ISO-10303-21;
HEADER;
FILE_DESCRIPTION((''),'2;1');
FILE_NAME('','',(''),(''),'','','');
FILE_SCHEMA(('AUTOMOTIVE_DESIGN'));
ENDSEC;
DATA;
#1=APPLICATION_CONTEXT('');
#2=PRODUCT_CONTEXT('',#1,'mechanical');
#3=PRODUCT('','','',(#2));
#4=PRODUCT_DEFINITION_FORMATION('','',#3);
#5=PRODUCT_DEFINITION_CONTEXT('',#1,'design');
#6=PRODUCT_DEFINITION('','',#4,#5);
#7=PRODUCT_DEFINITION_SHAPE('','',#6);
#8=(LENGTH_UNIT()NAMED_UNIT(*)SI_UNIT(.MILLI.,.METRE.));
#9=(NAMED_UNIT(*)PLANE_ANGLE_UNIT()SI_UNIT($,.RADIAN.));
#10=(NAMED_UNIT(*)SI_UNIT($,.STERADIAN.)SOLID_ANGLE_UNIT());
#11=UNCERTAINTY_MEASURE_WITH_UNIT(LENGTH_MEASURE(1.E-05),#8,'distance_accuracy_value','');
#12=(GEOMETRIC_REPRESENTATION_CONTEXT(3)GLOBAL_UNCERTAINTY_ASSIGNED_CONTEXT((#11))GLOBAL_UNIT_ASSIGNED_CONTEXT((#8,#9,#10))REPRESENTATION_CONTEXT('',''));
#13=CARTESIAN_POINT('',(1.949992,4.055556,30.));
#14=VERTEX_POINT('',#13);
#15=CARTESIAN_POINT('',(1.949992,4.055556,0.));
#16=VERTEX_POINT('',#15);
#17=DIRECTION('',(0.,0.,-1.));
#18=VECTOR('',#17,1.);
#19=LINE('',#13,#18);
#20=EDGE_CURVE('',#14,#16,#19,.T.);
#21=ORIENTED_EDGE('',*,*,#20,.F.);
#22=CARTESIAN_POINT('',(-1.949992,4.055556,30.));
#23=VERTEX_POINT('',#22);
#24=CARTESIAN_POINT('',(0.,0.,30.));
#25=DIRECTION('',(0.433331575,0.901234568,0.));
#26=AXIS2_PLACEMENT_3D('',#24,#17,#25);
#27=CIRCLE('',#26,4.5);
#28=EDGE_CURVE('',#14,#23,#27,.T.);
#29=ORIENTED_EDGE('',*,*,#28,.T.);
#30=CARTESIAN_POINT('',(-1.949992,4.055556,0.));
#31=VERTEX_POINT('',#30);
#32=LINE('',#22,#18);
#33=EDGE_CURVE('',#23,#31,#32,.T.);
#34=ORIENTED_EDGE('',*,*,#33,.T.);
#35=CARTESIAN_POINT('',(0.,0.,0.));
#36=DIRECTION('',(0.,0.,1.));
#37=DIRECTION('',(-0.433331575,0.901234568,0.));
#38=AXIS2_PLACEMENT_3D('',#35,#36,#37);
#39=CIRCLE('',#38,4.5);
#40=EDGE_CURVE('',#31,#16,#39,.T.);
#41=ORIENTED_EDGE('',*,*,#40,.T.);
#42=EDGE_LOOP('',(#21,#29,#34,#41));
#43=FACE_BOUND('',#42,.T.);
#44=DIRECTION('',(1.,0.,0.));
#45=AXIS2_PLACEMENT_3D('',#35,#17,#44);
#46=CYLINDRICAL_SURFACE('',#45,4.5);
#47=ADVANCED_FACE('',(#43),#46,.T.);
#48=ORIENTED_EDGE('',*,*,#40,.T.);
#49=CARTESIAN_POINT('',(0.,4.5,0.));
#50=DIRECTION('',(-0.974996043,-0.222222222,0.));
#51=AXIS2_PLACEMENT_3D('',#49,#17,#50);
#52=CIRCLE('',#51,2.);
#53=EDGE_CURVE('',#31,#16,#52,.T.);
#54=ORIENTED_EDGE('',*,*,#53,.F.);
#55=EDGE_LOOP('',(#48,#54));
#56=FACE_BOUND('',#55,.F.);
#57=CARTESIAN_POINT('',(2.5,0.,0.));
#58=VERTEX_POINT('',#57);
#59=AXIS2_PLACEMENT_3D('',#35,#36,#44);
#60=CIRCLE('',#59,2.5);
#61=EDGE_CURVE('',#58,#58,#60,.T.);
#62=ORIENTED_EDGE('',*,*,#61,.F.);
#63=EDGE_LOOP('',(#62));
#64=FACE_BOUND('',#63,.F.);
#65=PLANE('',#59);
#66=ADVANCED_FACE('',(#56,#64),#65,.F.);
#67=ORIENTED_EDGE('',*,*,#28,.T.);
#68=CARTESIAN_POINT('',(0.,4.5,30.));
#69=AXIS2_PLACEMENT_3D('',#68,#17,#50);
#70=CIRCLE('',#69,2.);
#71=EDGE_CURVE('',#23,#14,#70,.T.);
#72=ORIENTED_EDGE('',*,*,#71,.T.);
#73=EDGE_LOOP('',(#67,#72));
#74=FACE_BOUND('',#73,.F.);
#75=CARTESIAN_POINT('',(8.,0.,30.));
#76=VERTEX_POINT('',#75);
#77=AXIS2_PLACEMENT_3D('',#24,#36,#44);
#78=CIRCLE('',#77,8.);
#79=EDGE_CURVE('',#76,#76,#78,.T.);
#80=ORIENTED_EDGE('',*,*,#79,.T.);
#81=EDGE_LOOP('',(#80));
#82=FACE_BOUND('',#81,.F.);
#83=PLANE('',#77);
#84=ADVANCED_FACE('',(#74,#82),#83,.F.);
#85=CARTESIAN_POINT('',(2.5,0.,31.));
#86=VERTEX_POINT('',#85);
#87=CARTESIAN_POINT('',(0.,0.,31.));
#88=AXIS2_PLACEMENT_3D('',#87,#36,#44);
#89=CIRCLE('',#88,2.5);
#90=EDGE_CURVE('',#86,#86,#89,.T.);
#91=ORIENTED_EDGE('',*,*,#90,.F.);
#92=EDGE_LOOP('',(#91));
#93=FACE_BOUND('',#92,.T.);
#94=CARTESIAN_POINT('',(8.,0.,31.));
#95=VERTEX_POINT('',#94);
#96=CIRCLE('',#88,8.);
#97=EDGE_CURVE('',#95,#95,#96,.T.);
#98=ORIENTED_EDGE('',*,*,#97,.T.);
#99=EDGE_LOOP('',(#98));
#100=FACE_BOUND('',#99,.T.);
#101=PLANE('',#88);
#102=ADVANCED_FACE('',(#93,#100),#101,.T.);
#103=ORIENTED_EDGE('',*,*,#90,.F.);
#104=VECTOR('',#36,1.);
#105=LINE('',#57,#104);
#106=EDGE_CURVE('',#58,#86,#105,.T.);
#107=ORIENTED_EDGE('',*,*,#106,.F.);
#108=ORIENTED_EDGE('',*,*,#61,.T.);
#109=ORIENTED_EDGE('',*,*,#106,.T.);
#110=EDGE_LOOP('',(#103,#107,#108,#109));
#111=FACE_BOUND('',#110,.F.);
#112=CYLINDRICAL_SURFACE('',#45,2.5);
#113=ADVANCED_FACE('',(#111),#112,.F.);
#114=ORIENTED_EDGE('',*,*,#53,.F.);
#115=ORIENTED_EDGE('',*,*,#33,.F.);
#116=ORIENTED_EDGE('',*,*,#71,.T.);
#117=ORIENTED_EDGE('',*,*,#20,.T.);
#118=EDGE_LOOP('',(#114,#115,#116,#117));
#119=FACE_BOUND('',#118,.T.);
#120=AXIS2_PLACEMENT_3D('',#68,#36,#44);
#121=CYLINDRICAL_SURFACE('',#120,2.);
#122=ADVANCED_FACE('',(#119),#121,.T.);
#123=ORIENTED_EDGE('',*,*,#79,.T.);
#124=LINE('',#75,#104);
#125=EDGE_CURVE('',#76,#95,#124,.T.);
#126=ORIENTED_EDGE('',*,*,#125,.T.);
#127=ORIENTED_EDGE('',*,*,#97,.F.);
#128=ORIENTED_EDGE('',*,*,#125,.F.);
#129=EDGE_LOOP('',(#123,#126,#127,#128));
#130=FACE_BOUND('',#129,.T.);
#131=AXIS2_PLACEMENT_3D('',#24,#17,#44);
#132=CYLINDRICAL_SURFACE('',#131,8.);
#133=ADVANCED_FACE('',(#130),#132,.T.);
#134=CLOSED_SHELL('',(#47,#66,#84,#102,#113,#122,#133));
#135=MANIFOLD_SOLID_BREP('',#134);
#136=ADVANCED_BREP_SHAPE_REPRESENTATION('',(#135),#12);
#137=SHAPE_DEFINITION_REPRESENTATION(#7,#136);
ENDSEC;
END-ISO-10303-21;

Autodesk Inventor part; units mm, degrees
ref_plane "YZ Plane" through (0, 0, 0) normal (1, 0, 0) x (0, 1, 0)
ref_plane "XZ Plane" through (0, 0, 0) normal (0, 1, 0) x (-1, 0, 0)
ref_plane "XY Plane" through (0, 0, 0) normal (0, 0, 1) x (1, 0, 0)
sketch "Skizze1" plane through (0, 0, 0) normal (0, 0, 1) x (1, 0, 0)
  circle A0 centre (0, 0) radius 2.5
  circle A1 centre (0, 0) radius 4.5
  dimension "d0" = 5
  dimension "d1" = 9
extrude "Extrusion1" add sketch "Skizze1" along normal blind 30
sketch "Skizze2" plane through (0, 0, 30) normal (0, 0, 1) x (1, 0, 0)
  circle A0 centre (0, 0) radius 4.5 projected
  circle A1 centre (0, 4.5) radius 2
  point P0 (1.95, 4.0556)
  point P1 (-1.95, 4.0556)
  dimension "d4" = 4
extrude "Extrusion2" add sketch "Skizze2" against normal blind 30 contours A0 A1 picked at (-0.7058, 5.0154)
sketch "Skizze3" plane through (0, 0, 30) normal (0, 0, 1) x (1, 0, 0)
  arc A0 (-1.95, 4.0556) -> (1.95, 4.0556) centre (0, 0) ccw projected
  arc A1 (1.95, 4.0556) -> (-1.95, 4.0556) centre (0, 4.5) ccw projected
  circle A2 centre (0, 0) radius 2.5 projected
  circle A3 centre (0, 0) radius 8
  dimension "d7" = 16
extrude "Extrusion3" add sketch "Skizze3" along normal blind 1 contours A1 A0 | A3
properties part number "Motorcameralager"
